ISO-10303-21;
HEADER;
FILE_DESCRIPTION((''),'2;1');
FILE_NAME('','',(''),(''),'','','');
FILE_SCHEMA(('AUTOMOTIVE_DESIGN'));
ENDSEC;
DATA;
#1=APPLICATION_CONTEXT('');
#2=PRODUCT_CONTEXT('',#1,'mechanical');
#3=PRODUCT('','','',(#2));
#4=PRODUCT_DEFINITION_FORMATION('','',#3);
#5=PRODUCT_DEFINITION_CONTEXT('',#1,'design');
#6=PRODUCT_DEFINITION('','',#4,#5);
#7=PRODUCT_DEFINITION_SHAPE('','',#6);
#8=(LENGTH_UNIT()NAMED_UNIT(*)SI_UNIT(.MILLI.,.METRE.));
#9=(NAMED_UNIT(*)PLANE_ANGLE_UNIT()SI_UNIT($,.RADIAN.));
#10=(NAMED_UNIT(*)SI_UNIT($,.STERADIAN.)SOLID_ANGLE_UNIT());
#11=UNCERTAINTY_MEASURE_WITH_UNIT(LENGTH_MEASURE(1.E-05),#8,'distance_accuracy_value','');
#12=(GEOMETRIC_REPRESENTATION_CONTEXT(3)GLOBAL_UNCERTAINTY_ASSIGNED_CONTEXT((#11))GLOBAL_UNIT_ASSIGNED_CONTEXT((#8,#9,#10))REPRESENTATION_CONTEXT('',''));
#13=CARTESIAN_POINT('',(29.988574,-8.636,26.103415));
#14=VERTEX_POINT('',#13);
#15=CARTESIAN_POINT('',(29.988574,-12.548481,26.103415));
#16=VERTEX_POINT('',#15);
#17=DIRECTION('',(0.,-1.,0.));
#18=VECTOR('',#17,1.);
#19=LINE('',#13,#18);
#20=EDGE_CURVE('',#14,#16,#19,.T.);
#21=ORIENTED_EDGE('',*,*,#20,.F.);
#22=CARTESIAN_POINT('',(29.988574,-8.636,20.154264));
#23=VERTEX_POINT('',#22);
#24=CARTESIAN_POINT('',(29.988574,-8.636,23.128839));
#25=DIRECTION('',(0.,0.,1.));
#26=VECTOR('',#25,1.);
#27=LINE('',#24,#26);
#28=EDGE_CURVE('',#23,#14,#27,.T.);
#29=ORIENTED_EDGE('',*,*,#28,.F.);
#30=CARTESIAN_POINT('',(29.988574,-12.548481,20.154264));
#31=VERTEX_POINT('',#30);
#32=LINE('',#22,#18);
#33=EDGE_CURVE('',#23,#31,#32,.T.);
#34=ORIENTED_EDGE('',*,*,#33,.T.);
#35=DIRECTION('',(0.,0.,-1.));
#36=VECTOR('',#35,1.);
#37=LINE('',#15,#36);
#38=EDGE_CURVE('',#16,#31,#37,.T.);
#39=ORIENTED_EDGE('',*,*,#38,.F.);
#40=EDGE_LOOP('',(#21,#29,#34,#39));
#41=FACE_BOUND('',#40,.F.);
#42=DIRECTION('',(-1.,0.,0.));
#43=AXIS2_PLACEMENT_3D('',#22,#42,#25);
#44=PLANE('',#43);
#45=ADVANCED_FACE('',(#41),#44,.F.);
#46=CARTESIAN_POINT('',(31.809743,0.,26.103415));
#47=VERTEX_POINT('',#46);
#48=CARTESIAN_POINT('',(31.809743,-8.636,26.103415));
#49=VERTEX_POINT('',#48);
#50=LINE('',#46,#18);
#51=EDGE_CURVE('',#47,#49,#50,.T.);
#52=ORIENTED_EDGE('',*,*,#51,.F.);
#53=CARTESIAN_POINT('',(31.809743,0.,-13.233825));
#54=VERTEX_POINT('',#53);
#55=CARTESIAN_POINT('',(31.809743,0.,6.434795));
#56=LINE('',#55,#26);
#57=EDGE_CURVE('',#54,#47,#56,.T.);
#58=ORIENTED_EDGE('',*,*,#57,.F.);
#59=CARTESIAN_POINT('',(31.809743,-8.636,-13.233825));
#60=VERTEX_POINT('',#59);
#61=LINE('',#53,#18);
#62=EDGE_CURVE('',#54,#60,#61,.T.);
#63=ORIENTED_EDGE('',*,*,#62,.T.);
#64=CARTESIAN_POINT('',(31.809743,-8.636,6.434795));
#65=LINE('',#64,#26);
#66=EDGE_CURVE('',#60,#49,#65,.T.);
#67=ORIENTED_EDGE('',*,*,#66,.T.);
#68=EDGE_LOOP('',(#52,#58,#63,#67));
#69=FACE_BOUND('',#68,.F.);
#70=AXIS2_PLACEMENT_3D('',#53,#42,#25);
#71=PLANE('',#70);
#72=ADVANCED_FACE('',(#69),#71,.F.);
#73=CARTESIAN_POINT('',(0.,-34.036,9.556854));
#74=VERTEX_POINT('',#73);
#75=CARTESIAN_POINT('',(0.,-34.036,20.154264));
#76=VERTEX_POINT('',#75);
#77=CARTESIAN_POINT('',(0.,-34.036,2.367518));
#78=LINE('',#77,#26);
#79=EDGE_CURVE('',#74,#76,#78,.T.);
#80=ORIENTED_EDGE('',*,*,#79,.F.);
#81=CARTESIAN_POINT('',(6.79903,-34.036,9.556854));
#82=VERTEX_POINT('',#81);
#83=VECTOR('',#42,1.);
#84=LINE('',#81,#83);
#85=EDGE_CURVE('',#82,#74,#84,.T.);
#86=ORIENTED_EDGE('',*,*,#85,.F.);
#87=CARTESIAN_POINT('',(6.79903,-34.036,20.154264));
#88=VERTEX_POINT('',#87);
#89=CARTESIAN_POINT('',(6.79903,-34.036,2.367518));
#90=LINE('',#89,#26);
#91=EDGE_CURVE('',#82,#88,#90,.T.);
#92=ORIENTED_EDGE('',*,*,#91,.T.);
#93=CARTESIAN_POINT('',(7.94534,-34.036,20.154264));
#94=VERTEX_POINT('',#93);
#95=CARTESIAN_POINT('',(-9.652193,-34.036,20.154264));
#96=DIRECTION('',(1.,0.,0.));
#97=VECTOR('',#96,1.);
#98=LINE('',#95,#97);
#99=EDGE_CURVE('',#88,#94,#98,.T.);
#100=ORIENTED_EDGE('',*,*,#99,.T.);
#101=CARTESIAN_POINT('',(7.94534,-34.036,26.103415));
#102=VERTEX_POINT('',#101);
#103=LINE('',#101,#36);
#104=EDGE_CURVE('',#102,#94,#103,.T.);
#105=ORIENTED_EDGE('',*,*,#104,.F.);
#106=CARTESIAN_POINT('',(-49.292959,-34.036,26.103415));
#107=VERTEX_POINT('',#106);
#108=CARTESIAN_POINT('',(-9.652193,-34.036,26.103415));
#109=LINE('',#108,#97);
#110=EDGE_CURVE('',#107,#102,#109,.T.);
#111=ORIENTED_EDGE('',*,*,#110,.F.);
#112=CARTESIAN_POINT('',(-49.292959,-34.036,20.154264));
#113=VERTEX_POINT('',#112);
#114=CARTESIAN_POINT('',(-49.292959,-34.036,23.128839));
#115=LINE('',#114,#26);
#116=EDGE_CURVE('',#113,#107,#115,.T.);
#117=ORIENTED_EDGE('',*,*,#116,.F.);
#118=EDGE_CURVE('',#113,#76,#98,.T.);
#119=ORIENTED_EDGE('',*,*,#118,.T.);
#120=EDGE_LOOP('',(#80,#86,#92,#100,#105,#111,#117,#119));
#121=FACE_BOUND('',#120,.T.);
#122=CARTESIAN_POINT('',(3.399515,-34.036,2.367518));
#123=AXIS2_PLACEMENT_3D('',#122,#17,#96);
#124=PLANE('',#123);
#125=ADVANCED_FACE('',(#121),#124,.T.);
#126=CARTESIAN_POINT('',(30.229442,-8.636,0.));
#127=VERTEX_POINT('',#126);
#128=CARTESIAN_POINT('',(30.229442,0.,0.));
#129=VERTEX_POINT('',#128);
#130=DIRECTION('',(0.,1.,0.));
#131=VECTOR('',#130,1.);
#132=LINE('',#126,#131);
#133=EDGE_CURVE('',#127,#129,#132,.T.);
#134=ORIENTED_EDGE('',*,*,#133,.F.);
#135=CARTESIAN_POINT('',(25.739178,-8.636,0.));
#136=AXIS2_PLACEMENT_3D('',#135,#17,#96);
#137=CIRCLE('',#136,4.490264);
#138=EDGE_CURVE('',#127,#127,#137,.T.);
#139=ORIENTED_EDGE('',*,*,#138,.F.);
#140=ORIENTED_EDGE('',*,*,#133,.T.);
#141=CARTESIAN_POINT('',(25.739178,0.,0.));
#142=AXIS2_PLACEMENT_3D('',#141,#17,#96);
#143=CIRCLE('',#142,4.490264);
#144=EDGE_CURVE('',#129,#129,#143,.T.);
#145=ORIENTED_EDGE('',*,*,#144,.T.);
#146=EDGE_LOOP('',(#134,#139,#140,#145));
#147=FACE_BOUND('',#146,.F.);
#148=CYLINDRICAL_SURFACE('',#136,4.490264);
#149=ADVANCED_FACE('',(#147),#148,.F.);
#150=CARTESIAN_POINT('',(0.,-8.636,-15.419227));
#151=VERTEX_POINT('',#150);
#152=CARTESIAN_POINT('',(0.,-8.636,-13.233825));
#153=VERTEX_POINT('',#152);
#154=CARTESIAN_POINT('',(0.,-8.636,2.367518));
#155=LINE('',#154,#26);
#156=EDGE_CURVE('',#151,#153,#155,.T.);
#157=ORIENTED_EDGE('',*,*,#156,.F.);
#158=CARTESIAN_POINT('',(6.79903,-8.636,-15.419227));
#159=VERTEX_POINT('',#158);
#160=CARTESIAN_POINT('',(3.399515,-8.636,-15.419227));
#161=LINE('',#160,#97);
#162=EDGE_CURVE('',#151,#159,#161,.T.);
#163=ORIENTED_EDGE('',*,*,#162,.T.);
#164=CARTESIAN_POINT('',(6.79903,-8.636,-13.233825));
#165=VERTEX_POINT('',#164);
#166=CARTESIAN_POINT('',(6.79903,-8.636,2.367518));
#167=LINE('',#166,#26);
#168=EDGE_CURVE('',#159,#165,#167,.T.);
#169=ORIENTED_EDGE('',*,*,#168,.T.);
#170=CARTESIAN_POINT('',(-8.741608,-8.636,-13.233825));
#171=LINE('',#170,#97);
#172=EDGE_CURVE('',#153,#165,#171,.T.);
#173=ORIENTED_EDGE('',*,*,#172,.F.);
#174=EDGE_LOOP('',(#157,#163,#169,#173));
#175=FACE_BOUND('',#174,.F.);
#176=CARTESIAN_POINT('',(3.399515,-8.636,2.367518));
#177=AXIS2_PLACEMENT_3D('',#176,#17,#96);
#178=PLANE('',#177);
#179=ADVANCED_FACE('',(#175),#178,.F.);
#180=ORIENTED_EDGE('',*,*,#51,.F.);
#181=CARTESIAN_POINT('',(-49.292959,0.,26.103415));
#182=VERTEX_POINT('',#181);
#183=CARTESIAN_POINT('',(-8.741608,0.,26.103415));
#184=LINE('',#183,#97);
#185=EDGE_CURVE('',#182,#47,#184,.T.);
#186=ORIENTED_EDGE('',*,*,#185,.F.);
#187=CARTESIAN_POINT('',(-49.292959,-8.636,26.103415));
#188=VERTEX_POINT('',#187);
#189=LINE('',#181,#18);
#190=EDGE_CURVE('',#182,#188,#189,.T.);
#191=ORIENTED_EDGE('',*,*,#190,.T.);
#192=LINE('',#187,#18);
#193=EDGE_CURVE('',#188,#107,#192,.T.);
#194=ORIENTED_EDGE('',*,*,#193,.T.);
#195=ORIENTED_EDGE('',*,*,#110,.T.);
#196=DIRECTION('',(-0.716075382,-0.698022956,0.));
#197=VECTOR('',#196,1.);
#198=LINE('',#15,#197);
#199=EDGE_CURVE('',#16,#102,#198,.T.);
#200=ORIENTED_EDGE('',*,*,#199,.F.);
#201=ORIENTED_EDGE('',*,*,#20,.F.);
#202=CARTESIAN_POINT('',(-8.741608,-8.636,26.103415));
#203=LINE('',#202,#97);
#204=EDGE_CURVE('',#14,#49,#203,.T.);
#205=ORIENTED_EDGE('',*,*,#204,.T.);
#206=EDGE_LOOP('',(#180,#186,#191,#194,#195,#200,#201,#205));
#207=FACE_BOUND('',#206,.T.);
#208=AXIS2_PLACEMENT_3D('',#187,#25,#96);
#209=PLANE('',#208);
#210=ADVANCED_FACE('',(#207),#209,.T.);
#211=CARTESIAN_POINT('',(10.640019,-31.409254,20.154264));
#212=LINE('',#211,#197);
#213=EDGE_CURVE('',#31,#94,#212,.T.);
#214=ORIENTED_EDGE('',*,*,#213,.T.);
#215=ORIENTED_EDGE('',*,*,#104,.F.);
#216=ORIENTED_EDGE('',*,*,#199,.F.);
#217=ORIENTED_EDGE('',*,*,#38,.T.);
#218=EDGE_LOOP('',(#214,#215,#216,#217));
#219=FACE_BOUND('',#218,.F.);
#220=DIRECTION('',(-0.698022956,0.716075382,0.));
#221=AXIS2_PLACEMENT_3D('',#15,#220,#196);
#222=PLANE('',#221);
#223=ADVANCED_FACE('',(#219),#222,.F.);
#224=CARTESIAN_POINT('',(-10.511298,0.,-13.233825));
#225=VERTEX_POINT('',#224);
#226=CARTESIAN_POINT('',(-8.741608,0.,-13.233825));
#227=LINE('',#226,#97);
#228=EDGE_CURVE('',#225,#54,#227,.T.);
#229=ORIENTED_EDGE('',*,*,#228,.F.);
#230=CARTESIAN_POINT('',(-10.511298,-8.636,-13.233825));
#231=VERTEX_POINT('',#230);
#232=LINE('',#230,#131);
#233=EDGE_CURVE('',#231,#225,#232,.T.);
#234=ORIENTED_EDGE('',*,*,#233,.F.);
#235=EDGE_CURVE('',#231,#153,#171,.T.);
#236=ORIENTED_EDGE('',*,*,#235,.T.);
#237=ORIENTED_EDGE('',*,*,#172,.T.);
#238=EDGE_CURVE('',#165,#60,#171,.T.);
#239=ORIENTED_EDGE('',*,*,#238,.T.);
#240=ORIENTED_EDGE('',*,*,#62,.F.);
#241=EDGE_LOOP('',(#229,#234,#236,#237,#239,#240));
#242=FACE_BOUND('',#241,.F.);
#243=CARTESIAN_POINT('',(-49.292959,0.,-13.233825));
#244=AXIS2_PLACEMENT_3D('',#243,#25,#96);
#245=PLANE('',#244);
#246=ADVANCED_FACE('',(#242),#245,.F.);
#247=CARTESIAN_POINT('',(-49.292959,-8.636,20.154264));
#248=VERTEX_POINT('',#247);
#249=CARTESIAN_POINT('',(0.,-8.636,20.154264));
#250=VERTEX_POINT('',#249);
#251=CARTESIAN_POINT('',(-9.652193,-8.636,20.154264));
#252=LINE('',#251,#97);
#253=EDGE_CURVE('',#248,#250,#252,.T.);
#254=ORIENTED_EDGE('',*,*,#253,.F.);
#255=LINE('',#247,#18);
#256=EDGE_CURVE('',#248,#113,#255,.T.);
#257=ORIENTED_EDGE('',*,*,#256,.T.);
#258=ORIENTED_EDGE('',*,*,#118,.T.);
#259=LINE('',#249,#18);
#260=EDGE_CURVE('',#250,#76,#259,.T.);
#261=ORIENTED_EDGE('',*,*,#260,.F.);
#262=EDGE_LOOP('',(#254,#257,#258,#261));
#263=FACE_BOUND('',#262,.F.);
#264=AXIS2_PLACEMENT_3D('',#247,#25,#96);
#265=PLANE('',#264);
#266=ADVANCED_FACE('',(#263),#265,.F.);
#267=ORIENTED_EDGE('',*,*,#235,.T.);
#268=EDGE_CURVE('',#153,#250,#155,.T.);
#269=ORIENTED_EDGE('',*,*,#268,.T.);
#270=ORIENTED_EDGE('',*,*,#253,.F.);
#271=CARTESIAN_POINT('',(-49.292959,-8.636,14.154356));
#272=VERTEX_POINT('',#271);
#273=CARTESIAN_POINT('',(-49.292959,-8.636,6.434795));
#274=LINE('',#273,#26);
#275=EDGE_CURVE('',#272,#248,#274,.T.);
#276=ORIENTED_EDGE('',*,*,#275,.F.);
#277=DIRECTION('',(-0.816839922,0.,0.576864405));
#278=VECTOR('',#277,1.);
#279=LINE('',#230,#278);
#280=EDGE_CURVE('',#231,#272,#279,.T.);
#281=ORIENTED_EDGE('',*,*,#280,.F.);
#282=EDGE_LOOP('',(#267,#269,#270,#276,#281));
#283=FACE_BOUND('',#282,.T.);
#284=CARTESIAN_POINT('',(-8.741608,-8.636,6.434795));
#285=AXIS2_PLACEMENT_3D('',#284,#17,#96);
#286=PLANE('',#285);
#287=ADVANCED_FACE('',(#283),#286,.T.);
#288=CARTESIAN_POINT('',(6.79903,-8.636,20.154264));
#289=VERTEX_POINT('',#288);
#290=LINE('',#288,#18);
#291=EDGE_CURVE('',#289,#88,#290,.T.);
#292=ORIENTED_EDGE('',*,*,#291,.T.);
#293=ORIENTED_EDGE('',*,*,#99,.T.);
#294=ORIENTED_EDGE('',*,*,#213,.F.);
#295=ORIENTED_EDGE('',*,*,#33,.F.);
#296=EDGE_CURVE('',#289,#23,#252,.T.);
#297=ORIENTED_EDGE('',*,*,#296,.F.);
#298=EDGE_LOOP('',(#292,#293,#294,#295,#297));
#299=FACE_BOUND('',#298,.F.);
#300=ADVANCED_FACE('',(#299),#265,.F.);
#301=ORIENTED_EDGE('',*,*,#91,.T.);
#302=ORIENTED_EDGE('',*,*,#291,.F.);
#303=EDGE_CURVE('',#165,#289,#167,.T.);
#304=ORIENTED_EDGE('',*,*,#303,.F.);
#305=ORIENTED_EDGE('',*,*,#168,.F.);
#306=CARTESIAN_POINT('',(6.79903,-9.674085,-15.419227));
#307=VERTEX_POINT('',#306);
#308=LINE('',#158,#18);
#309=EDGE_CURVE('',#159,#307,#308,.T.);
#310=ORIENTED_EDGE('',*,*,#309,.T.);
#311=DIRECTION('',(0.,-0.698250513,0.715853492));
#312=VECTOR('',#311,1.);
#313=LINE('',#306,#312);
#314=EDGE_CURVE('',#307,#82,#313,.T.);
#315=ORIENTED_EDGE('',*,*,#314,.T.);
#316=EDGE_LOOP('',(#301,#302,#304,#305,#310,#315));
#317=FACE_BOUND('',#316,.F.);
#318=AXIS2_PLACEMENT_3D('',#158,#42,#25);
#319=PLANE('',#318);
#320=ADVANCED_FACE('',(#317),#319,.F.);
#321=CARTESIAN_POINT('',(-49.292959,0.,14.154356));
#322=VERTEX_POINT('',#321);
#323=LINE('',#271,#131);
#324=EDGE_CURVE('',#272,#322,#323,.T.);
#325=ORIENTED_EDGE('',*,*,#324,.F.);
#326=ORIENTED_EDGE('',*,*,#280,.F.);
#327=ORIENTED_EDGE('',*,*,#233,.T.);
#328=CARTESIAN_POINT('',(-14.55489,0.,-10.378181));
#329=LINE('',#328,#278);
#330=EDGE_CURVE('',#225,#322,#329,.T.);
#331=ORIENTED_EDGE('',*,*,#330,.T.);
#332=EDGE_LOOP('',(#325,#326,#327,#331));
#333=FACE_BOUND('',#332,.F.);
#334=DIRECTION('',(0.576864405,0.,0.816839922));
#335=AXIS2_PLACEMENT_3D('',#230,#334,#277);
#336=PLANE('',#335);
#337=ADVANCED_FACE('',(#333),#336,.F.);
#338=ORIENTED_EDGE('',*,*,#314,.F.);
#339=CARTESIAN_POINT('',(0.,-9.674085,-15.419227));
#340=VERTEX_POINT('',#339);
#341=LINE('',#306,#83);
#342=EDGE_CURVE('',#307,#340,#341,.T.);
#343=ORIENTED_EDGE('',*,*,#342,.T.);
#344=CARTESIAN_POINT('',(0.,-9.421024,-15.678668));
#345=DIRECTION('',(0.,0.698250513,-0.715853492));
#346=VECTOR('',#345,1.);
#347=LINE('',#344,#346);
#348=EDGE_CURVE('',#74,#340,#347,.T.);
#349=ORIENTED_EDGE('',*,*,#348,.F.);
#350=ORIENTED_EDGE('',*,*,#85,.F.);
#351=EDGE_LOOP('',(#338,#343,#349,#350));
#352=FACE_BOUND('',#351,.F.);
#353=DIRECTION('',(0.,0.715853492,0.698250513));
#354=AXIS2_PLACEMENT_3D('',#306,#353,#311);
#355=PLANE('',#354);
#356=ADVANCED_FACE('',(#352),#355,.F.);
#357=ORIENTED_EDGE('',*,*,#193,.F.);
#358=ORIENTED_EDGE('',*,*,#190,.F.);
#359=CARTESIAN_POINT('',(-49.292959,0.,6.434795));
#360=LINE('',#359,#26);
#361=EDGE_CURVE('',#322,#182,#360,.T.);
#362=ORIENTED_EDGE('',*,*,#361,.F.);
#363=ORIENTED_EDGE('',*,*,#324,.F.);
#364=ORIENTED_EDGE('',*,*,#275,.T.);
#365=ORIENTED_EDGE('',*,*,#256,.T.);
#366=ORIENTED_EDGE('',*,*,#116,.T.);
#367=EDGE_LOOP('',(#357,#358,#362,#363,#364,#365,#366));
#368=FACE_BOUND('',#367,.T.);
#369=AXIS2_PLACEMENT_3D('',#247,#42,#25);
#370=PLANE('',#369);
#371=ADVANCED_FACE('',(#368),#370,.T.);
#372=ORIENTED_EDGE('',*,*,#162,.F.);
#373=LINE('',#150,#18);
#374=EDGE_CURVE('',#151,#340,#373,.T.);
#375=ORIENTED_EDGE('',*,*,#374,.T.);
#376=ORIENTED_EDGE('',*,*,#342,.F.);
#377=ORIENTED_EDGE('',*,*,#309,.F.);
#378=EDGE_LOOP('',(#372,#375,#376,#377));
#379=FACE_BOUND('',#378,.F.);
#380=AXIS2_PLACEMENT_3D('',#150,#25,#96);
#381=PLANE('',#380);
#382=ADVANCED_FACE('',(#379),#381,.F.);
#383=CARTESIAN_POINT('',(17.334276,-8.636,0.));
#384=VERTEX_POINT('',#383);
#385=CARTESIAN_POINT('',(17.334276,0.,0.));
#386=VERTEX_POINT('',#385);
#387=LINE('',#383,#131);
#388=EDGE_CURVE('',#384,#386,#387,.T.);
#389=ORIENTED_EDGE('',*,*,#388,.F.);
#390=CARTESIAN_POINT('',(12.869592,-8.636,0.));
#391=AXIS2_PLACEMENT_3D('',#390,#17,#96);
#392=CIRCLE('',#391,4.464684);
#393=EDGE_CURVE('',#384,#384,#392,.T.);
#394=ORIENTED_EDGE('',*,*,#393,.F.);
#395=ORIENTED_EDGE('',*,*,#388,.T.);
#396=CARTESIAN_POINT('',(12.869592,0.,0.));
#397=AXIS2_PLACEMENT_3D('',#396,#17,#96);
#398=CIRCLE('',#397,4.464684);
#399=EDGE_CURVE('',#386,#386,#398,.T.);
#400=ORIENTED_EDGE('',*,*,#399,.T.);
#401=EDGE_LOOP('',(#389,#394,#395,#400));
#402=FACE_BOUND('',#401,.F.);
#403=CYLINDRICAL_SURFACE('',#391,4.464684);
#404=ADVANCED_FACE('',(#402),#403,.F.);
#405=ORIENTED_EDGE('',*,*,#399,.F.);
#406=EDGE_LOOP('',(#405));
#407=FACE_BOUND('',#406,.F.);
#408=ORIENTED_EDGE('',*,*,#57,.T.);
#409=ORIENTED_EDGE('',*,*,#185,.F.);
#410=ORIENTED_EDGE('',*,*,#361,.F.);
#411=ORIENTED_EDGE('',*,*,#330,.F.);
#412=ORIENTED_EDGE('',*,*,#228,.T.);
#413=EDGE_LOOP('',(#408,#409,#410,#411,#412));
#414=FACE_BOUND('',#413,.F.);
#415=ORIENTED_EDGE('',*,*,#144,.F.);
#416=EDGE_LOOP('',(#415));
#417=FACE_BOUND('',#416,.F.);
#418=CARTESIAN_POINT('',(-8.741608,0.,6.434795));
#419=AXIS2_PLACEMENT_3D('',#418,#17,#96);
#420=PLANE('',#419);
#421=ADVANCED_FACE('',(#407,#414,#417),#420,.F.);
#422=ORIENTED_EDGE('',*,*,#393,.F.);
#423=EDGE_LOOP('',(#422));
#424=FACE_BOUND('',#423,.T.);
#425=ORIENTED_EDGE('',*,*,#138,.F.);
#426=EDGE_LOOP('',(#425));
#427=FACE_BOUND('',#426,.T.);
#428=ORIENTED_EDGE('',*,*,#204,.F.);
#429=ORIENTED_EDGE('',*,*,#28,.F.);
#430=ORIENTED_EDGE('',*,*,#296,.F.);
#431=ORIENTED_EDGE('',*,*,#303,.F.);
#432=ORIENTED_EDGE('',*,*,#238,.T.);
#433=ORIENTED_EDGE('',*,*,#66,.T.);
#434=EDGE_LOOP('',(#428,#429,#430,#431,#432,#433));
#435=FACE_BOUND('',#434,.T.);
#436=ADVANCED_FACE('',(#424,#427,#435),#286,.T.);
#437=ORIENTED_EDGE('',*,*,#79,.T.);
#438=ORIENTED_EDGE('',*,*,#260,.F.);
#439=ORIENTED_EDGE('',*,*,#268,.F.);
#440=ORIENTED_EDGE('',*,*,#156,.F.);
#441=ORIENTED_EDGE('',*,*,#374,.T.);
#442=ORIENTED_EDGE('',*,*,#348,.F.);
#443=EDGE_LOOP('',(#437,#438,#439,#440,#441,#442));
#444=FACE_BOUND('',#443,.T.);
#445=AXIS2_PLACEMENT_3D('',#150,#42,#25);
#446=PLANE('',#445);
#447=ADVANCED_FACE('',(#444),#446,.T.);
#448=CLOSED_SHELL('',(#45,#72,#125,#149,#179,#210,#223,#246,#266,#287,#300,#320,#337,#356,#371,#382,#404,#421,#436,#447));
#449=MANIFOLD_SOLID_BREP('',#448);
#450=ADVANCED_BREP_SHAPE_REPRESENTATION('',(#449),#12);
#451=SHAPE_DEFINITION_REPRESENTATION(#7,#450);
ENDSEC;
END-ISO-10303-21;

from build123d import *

# Parameters (mm, degrees)
F0_W      = 81.1027027667
F0_H      = 39.3372392282
F1_DEPTH  = 8.636
F3_DEPTH  = 25.4
F4_W      = 79.281533137
F4_H      = 5.9491507709
F5_DEPTH  = 25.4
F6_W      = 6.7990301177
F6_H      = 35.5734908953
F7_DEPTH  = 25.4
F9_DEPTH  = 25.4
F10_R     = 4.4646843998
F10_R_2   = 4.4902635422
F11_DEPTH = 25.4
F13_DEPTH = 25.4


with BuildPart() as f1:
    # F0 (on Front) → F1 (new body)
    with BuildSketch(Plane.XZ):
        with Locations((-8.7416078895, 6.434794981)):
            Rectangle(F0_W, F0_H)
    extrude(amount=F1_DEPTH)

    # F2 (on face) → F3 (cut)
    with BuildSketch(Plane.XZ.offset(8.636)):
        Polygon((-49.2929592729, -13.2338246331), (-10.5112984066, -13.2338246331), (-49.2929592729, 14.1543564849), align=None)
    extrude(amount=-F3_DEPTH, mode=Mode.SUBTRACT)

    # F4 (on face) → F5 (join)
    with BuildSketch(Plane.XZ.offset(8.636)):
        with Locations((-9.6521927044, 23.1288392097)):
            Rectangle(F4_W, F4_H)
    extrude(amount=F5_DEPTH)

    # F6 (on face) → F7 (join)
    with BuildSketch(Plane.XZ.offset(8.636)):
        with Locations((3.3995150588, 2.3675183766)):
            Rectangle(F6_W, F6_H)
    extrude(amount=F7_DEPTH)

    # F8 (on face) → F9 (cut)
    with BuildSketch(Plane.YZ.offset(6.7990301177)):
        Polygon((-34.036, -15.4192270711), (-9.674085426, -15.4192270711), (-34.036, 9.5568542875), align=None)
    extrude(amount=-F9_DEPTH, mode=Mode.SUBTRACT)

    # F10 (on face) → F11 (cut)
    with BuildSketch(Plane.XZ.offset(8.636)):
        with Locations((12.8695918247, 0)):
            Circle(F10_R)
        with Locations((25.7391780615, 0)):
            Circle(F10_R_2)
    extrude(amount=-F11_DEPTH, mode=Mode.SUBTRACT)

    # F12 (on face) → F13 (cut)
    with BuildSketch(Plane.XY.offset(26.1034145951)):
        Polygon((29.9885738641, -34.036), (29.9885738641, -12.5484813482), (7.9453402096, -34.036), align=None)
    extrude(amount=-F13_DEPTH, mode=Mode.SUBTRACT)


solid = f1.part
